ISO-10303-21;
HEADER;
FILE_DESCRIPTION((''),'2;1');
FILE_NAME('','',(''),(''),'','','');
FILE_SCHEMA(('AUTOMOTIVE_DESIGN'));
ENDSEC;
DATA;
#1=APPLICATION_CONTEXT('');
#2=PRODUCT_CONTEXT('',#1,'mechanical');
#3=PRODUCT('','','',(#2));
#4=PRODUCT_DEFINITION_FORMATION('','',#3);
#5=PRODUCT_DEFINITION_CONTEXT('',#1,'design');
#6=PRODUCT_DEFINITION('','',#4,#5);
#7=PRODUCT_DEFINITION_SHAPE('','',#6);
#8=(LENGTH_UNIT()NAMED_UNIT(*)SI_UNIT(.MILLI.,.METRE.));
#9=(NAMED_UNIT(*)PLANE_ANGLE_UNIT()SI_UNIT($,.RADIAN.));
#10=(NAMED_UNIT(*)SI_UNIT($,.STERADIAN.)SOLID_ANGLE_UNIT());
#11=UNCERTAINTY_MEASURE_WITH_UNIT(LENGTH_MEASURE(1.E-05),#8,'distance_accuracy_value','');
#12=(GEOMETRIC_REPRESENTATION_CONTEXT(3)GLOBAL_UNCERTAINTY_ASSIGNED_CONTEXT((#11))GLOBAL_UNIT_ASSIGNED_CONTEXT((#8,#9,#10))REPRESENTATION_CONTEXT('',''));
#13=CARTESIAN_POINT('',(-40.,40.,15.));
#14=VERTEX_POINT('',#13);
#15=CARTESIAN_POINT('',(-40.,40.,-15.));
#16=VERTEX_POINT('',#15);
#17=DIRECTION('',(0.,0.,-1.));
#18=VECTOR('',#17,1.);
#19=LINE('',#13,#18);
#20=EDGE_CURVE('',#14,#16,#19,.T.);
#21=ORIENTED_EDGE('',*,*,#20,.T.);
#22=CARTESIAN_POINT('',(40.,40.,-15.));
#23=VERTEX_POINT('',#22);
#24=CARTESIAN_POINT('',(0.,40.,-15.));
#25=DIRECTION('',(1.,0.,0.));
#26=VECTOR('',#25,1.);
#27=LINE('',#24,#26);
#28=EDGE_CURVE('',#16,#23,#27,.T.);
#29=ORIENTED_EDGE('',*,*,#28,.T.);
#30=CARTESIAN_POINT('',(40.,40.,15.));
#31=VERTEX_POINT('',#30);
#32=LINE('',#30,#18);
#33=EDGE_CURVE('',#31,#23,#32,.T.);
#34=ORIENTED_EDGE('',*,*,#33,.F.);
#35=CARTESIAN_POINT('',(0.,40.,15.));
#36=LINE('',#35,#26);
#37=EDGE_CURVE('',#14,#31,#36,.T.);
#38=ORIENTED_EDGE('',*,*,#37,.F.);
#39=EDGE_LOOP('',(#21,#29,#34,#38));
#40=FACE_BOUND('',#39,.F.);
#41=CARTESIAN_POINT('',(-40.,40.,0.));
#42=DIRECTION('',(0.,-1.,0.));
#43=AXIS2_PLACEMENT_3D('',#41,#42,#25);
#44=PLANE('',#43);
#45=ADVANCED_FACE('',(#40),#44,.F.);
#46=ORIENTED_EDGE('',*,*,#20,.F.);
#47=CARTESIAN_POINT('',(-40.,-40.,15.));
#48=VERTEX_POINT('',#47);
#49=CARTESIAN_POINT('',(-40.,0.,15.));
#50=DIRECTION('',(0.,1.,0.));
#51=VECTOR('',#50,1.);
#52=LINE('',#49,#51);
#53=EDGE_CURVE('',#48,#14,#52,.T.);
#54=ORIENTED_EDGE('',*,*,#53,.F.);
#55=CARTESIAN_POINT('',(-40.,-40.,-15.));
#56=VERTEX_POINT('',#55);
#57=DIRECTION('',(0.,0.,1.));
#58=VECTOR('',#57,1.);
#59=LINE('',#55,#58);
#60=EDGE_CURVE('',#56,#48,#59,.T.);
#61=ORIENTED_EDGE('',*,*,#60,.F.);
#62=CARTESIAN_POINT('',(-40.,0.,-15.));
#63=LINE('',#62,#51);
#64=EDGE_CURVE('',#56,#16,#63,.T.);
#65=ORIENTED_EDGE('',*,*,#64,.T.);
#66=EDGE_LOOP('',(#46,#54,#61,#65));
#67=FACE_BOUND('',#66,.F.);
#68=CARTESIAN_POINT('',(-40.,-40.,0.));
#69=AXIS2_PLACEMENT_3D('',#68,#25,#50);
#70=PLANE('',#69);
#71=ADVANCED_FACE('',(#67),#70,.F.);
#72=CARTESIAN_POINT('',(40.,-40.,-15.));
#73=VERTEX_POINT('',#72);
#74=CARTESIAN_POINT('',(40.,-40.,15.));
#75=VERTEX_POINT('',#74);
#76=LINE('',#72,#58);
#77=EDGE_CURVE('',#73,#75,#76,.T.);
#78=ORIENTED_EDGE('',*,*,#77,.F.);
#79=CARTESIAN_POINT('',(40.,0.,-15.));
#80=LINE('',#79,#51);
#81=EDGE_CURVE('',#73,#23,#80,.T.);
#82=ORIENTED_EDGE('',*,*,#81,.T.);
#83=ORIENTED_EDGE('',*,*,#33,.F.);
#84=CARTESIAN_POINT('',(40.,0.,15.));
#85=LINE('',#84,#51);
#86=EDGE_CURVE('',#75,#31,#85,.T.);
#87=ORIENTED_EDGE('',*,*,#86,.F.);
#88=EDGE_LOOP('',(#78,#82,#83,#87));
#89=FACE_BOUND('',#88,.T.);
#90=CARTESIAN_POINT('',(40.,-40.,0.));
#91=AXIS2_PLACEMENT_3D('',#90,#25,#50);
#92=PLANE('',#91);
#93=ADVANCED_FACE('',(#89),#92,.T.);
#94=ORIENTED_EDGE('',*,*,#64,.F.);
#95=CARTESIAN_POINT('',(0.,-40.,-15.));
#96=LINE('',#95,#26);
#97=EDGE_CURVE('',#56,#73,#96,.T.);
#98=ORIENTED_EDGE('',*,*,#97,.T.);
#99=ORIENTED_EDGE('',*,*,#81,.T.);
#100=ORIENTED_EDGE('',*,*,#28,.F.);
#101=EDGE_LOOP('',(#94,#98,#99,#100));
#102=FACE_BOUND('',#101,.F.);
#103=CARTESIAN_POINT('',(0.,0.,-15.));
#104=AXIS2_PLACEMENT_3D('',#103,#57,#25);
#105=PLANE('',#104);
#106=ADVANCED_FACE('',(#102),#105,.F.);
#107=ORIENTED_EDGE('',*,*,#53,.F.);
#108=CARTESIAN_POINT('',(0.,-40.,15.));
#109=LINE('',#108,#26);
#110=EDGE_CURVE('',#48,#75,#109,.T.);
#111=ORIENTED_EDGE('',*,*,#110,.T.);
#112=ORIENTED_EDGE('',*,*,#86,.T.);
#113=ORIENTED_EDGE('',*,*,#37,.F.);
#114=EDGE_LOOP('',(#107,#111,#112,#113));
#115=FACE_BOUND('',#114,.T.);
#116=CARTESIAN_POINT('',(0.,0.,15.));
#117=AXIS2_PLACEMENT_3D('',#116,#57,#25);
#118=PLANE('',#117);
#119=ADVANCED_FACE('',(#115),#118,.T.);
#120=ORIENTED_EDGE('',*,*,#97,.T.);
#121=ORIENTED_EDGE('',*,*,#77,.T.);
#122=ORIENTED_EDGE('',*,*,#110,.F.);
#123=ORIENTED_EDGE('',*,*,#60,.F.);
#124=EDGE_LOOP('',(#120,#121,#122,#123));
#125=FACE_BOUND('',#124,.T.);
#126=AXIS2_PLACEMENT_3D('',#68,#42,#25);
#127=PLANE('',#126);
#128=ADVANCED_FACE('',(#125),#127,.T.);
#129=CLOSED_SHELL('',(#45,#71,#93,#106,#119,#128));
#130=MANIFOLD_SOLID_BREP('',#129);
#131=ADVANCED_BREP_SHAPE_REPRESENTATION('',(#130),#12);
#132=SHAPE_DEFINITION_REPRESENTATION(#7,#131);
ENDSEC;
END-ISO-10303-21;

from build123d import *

# Parameters (mm, degrees)
F0_W     = 80
F0_H     = 80
F1_DEPTH = 15


# Not quite as in the source:
# - a feature of the source that left no trace in its solid (it failed there, or was rolled back) is left out


with BuildPart() as f1:
    # F0 (on Top) → F1 (new body, symmetric)
    with BuildSketch(Plane.XY):
        Rectangle(F0_W, F0_H)
    extrude(amount=F1_DEPTH, both=True)


solid = f1.part
